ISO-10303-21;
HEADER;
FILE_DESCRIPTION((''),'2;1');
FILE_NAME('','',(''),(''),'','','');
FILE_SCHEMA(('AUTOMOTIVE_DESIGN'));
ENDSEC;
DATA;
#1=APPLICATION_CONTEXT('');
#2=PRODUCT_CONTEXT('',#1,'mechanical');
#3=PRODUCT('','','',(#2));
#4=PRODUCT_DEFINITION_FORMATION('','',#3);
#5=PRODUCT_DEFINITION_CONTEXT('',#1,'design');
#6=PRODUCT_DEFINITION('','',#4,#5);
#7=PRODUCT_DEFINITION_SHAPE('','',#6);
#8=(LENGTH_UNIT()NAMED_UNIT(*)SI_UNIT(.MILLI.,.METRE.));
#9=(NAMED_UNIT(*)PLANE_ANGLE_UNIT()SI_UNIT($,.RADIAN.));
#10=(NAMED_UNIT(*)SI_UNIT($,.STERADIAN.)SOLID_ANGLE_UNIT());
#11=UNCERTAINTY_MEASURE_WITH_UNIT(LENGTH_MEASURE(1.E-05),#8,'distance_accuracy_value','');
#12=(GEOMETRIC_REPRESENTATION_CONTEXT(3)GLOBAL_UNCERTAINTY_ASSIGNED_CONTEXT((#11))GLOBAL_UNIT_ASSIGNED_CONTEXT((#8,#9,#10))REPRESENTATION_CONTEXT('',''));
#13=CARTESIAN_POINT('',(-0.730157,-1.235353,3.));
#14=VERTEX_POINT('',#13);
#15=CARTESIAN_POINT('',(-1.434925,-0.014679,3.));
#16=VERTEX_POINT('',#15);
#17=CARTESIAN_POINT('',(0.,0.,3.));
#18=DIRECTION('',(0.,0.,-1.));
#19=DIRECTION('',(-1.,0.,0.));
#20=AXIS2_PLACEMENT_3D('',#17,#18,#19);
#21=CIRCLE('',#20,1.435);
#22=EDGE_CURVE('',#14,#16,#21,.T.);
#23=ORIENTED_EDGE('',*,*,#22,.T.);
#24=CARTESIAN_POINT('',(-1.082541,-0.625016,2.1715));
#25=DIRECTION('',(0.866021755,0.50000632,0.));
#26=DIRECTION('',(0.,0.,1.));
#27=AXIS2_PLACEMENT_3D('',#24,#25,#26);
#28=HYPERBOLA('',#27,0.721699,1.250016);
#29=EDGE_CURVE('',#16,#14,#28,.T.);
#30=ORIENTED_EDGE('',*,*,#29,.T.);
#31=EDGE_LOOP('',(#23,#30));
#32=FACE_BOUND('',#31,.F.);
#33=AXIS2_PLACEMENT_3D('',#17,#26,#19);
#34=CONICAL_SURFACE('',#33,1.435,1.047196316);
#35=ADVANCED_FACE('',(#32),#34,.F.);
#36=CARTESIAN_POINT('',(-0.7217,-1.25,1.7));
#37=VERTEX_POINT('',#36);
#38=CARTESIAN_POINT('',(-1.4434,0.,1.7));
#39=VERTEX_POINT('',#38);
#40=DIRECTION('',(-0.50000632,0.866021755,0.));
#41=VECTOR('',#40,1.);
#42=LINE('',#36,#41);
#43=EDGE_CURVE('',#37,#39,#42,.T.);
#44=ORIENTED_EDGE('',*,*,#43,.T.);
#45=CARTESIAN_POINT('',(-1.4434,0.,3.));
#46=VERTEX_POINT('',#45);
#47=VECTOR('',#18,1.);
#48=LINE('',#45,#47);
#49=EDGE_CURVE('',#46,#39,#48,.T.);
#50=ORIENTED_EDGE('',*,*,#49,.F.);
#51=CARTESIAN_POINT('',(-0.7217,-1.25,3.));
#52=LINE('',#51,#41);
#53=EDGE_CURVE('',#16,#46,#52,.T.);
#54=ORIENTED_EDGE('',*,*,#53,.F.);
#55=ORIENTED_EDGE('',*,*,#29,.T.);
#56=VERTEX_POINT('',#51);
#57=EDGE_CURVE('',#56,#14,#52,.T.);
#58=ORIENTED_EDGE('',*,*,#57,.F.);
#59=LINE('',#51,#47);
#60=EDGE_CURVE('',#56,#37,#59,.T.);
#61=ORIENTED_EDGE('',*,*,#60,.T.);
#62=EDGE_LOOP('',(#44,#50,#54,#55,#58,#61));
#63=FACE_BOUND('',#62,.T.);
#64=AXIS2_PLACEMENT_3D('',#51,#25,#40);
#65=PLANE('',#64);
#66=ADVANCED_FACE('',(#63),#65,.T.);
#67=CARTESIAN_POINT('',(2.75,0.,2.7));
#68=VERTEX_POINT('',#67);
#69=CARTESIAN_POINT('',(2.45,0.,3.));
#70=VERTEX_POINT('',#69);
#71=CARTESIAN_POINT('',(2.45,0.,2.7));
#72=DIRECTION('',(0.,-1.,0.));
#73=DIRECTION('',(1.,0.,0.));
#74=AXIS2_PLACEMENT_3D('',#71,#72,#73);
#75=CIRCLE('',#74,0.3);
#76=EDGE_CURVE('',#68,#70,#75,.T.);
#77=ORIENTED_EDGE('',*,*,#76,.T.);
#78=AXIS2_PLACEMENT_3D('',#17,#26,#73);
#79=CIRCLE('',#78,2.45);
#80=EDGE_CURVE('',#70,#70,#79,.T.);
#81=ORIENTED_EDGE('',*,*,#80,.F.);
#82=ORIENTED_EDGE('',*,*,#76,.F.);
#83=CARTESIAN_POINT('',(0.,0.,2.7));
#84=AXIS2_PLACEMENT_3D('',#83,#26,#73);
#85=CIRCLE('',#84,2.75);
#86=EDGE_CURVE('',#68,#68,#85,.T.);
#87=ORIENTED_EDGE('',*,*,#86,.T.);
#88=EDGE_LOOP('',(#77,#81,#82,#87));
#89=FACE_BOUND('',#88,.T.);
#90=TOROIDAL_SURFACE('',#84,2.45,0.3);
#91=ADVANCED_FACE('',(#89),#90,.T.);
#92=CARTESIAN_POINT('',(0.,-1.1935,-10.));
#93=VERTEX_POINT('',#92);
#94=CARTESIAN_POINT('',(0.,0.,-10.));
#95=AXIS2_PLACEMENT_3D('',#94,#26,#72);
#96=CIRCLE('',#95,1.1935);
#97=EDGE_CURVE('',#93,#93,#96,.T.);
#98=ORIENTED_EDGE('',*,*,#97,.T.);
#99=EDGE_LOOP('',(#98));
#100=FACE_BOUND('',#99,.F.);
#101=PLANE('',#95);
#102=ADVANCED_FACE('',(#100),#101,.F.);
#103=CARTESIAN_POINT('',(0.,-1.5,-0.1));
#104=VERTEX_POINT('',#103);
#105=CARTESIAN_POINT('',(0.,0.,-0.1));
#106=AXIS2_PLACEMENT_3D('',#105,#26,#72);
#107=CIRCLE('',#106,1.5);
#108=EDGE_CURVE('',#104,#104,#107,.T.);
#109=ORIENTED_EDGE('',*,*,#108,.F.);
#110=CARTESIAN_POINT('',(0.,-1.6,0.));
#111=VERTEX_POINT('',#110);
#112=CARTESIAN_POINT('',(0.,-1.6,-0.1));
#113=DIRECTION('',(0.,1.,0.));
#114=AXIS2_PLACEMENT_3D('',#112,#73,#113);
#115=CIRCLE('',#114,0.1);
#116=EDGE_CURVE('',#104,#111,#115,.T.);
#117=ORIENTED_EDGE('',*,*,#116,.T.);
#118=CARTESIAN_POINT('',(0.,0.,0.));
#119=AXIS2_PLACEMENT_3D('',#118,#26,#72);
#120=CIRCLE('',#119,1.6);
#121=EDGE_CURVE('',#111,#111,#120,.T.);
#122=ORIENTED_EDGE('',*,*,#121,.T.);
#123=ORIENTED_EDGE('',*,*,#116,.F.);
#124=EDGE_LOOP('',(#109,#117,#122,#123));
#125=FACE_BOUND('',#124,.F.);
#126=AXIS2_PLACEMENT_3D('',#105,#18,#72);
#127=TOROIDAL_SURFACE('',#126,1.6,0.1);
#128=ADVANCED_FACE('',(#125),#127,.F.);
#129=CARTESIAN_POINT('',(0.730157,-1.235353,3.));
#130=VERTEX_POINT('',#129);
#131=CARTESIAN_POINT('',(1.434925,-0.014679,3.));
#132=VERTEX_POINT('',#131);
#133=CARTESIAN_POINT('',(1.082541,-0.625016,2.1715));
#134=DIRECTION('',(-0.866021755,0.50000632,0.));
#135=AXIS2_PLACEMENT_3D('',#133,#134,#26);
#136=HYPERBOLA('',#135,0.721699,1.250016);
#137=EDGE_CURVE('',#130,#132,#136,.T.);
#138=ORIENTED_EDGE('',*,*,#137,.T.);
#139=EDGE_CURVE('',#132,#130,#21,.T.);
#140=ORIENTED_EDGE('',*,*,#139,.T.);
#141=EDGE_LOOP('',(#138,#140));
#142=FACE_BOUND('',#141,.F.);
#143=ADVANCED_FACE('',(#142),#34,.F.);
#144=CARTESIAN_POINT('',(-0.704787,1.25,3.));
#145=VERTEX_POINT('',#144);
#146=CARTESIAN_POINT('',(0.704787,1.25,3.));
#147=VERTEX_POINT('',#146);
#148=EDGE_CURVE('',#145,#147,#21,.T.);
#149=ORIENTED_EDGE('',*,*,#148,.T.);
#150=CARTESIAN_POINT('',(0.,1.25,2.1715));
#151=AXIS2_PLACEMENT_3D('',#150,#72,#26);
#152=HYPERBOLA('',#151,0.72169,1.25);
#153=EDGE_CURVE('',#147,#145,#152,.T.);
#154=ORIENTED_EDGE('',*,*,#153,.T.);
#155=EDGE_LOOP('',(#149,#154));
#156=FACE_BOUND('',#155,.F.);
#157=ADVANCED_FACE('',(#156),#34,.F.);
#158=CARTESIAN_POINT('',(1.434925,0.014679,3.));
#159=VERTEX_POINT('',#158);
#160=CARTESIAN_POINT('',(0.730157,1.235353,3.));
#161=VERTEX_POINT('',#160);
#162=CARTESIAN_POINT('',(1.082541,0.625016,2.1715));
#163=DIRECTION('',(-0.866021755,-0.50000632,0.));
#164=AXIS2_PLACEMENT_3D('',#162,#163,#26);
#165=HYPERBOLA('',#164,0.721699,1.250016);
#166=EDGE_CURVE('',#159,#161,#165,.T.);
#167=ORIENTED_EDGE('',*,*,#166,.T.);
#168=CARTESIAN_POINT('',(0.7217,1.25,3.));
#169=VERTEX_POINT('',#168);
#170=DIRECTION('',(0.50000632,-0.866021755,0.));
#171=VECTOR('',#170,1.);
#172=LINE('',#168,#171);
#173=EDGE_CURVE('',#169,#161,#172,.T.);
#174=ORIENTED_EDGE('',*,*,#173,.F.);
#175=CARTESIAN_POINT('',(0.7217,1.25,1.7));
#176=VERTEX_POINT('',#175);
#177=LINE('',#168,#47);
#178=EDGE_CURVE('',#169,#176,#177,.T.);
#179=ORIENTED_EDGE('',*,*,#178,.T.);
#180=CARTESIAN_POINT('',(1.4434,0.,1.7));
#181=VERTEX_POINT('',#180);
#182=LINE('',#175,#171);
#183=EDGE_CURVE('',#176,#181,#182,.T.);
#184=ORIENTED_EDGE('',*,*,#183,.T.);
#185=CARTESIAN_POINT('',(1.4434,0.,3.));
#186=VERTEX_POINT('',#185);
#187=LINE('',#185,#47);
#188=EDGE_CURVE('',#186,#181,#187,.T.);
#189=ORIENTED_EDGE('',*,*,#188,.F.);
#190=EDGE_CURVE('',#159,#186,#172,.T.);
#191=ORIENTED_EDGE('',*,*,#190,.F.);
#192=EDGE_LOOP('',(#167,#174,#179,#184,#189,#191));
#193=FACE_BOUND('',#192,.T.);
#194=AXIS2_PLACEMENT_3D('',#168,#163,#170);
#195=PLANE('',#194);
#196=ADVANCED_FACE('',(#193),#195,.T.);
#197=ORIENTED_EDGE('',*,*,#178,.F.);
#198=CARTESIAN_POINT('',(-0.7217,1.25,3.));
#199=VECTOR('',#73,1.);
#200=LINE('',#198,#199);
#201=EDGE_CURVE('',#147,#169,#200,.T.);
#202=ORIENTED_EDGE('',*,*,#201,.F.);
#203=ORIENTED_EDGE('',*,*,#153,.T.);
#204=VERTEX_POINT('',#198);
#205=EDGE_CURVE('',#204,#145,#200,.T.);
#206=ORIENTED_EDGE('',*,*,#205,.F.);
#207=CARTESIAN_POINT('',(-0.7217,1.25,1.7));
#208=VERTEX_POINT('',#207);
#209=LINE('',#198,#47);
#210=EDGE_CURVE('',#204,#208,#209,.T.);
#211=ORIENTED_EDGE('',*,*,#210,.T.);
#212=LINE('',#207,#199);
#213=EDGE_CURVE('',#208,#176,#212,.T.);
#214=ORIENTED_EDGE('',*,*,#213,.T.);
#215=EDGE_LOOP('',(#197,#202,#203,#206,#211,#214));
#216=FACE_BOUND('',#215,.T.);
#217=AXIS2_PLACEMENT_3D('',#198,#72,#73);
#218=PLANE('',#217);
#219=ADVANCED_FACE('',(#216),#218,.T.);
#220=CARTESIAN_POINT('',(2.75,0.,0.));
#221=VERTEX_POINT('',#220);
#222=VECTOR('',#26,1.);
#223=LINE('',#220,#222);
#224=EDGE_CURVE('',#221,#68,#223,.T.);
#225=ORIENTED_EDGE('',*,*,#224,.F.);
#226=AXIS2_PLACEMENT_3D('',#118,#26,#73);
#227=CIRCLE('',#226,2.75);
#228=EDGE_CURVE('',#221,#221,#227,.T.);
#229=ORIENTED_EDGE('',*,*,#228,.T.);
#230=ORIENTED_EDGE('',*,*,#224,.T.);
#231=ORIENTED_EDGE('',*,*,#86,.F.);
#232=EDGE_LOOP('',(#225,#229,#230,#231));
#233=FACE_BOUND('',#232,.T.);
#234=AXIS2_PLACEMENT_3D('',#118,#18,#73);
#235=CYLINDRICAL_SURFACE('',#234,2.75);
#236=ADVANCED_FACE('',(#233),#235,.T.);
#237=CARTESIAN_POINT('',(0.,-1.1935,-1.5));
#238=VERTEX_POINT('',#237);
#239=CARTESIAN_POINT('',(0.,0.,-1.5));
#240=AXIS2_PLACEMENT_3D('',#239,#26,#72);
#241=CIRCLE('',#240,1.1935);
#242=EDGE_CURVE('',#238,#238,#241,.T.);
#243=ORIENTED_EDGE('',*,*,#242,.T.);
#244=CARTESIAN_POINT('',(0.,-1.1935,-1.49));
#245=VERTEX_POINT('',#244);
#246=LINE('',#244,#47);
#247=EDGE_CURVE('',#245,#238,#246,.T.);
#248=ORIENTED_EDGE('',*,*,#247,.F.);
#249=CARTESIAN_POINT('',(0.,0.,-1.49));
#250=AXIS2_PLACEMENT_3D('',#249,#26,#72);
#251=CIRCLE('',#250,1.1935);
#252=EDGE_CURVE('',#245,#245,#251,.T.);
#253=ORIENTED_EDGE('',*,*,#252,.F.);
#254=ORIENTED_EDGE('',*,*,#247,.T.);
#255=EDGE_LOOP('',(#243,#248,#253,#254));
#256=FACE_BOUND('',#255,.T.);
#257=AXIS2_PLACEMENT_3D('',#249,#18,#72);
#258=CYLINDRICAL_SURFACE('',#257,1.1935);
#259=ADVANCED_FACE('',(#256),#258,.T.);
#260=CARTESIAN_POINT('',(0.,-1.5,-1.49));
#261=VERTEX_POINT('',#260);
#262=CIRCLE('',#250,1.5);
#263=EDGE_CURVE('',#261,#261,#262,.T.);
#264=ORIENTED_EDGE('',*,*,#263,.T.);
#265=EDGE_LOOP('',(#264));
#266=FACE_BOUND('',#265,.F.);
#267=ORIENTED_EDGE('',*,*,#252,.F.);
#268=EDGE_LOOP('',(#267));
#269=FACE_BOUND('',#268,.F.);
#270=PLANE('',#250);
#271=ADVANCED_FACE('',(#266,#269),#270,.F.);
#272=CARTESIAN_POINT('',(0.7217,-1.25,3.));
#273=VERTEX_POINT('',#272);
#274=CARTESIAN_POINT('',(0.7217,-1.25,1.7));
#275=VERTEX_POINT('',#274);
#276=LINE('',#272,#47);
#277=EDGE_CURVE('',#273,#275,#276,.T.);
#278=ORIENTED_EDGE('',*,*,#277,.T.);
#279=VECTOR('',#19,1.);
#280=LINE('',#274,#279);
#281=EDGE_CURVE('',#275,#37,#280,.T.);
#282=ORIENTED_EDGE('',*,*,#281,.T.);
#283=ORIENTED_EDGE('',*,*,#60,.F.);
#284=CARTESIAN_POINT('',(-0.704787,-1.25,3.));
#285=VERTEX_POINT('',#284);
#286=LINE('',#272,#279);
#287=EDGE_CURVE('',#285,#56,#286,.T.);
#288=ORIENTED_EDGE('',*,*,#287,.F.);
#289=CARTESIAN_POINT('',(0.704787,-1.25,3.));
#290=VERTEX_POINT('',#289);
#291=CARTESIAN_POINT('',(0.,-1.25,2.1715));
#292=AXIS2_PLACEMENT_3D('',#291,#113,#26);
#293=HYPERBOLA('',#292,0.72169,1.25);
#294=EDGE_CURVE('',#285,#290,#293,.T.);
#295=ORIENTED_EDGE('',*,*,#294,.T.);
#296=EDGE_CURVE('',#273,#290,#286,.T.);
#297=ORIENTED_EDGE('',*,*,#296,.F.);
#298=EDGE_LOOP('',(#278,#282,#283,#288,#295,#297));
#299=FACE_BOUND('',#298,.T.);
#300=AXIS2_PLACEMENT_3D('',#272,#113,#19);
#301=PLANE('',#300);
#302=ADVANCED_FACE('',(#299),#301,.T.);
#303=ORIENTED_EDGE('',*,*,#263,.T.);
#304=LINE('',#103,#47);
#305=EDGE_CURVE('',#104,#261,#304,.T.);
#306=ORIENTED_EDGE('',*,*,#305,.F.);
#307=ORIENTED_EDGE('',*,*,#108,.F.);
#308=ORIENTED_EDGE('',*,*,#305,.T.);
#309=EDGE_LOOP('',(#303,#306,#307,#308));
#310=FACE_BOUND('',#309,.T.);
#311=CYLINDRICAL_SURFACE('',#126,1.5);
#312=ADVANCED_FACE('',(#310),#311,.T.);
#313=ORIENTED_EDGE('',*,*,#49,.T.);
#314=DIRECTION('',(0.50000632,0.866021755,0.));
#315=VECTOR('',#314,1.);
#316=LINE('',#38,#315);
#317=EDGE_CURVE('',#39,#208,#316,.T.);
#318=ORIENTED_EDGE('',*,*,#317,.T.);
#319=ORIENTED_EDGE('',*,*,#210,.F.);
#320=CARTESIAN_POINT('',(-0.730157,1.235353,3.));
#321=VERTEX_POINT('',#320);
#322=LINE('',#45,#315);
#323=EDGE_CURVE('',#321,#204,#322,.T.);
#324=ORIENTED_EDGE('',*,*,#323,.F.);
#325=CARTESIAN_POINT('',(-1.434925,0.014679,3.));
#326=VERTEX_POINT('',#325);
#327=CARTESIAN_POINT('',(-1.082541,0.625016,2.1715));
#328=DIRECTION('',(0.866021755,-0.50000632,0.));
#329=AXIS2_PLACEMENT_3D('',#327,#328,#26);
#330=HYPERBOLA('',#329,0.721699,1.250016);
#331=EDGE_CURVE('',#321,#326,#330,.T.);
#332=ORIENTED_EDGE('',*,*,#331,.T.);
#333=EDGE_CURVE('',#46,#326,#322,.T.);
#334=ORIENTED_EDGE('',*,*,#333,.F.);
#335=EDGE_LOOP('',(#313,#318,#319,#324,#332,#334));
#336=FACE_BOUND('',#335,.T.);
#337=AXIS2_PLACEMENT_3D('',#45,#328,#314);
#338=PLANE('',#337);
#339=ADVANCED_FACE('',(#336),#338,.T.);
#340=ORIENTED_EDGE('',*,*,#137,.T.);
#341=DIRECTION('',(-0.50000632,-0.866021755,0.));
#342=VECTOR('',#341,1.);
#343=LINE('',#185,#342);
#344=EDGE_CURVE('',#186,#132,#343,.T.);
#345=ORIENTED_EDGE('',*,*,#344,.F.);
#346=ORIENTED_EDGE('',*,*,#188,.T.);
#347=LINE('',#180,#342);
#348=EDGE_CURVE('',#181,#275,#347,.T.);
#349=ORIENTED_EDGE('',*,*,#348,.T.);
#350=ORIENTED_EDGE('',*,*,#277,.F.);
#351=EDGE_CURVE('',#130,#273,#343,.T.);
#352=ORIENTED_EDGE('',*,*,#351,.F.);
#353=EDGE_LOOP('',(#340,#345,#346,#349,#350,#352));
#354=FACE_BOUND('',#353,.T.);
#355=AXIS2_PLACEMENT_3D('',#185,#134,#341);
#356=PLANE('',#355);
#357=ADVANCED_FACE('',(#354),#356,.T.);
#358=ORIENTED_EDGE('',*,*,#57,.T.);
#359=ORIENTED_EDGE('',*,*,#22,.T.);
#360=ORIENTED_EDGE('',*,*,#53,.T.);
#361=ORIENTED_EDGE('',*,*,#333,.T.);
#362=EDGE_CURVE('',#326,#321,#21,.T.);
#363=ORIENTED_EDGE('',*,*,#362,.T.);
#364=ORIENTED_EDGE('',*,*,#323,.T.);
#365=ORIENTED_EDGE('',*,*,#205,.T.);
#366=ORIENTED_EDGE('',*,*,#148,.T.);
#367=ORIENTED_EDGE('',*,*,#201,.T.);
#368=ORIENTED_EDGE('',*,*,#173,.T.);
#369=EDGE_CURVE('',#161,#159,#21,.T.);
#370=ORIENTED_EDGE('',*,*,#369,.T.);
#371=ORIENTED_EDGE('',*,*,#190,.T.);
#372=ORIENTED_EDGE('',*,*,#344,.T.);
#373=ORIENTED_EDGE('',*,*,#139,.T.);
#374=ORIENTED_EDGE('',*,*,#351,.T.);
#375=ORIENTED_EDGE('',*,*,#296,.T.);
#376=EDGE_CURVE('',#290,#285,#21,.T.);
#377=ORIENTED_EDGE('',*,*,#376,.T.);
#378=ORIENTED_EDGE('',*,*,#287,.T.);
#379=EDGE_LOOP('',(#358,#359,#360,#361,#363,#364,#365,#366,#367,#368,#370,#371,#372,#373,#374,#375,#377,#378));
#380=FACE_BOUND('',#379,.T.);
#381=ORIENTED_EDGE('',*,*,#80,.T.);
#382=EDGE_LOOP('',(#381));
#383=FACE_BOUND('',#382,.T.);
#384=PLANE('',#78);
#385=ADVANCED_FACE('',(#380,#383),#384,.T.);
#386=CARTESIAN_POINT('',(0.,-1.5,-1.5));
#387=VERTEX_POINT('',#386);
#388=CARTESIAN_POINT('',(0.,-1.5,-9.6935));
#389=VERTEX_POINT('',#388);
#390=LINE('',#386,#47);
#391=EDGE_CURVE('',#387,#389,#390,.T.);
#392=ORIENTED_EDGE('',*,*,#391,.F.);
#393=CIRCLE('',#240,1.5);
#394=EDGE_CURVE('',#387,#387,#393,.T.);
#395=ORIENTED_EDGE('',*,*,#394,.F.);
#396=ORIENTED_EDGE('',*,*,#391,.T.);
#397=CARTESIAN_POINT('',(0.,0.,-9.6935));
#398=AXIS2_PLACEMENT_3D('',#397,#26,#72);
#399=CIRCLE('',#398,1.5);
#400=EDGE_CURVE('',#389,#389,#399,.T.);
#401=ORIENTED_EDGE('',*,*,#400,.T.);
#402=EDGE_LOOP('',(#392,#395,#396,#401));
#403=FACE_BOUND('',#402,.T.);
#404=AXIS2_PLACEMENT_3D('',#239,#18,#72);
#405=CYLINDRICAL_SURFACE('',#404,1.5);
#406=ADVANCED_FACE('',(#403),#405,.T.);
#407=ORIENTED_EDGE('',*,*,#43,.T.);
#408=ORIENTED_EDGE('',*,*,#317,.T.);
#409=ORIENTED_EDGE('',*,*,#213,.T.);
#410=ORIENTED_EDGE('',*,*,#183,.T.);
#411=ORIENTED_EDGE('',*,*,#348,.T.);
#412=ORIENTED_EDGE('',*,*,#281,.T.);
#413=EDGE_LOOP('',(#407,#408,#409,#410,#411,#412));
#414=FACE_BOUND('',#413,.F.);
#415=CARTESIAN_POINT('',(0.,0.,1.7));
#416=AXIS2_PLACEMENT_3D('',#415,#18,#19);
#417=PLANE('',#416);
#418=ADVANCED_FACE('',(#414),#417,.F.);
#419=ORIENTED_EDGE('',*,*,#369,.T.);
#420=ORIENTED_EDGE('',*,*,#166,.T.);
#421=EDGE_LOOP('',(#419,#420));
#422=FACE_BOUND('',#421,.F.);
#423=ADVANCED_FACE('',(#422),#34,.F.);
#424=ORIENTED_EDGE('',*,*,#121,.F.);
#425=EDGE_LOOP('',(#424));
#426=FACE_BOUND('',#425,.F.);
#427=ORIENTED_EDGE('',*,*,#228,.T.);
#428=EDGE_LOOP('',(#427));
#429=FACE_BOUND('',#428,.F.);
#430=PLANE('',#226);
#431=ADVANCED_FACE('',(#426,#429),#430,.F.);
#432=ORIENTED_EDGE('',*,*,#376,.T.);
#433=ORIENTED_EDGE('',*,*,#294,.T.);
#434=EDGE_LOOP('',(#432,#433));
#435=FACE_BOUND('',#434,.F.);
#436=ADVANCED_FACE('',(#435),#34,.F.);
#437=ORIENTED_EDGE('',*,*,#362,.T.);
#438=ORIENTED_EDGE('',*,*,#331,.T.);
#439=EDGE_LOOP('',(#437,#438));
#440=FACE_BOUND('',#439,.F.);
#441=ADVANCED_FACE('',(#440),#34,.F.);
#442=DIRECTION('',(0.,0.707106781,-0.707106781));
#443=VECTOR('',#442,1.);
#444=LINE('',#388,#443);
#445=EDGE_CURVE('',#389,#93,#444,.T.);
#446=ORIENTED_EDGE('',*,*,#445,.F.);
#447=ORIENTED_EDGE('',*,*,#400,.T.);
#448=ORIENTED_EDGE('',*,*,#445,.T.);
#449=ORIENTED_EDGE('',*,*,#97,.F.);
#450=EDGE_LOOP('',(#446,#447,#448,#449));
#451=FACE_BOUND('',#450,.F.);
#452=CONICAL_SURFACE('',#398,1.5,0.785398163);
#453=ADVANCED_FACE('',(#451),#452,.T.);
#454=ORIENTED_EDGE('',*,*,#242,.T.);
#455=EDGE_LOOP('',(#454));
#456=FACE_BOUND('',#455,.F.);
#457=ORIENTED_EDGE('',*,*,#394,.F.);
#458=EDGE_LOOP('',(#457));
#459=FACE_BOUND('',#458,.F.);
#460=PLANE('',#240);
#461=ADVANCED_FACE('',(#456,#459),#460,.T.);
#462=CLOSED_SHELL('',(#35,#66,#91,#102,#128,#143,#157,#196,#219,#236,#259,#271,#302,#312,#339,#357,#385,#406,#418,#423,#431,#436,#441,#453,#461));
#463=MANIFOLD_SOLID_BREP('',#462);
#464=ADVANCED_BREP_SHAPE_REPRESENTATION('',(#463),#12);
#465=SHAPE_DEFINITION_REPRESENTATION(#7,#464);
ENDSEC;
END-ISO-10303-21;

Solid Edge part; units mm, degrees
sketch "Sketch1" plane through (0, 0, 0) normal (0, 0, 1) x (1, 0, 0)
  circle A0 centre (0, 0) radius 2.75
extrude "Protrusion1" add sketch "Sketch1" along normal blind 3
sketch "Sketch2" plane through (0, 0, 3) normal (0, 0, 1) x (0, 1, 0)
  line L0 (0, 1.4434) -> (1.25, 0.7217)
  line L1 (1.25, 0.7217) -> (1.25, -0.7217)
  line L2 (1.25, -0.7217) -> (0, -1.4434)
  line L3 (0, -1.4434) -> (-1.25, -0.7217)
  line L4 (-1.25, -0.7217) -> (-1.25, 0.7217)
  line L5 (-1.25, 0.7217) -> (0, 1.4434)
extrude "Cutout1" cut sketch "Sketch2" against normal blind 1.3
fillet "Round1" radius 0.3 1 edges at (-2.75, 0, 3)
sketch "Sketch3" plane through (0, 0, 0) normal (1, 0, 0) x (0, 1, 0)
  line L0 (-1.1935, -10) -> (0, -10)
  line L1 (-1.5, -9.6935) -> (-1.1935, -10)
  line L2 (-1.5, -1.5) -> (-1.5, -9.6935)
  line L3 (-1.1935, -1.5) -> (-1.5, -1.5)
  line L4 (-1.1935, -1.49) -> (-1.1935, -1.5)
  line L5 (-1.5, -1.49) -> (-1.1935, -1.49)
  line L6 (-1.5, -0.1) -> (-1.5, -1.49)
  arc A0 (-1.5, -0.1) -> (-1.6, 0) centre (-1.6, -0.1) ccw
  dimension "D1" = 1.5
  dimension "D2" = 0.01
  dimension "D3" = 0.1
  dimension "D4" = 10
revolve "RevolvedProtrusion1" add sketch "Sketch3" angle 360 about axis through (0, 0, -60.325) along (0, 0, 1) material side at (0, -0.5968, -9.95)
cosmetic_thread "Thread1"
sketch "Sketch4" plane through (0, 0, 0) normal (0, -1, 0) x (1, 0, 0)
  line L0 (-1.435, 3) -> (0, 2.1715)
revolve "RevolvedCutout1" cut sketch "Sketch4" angle 360 about axis through (0, 0, 57.15) along (0, 0, -1) material side at (-0.6925, 0, 2.6291)
properties material "Steel"
